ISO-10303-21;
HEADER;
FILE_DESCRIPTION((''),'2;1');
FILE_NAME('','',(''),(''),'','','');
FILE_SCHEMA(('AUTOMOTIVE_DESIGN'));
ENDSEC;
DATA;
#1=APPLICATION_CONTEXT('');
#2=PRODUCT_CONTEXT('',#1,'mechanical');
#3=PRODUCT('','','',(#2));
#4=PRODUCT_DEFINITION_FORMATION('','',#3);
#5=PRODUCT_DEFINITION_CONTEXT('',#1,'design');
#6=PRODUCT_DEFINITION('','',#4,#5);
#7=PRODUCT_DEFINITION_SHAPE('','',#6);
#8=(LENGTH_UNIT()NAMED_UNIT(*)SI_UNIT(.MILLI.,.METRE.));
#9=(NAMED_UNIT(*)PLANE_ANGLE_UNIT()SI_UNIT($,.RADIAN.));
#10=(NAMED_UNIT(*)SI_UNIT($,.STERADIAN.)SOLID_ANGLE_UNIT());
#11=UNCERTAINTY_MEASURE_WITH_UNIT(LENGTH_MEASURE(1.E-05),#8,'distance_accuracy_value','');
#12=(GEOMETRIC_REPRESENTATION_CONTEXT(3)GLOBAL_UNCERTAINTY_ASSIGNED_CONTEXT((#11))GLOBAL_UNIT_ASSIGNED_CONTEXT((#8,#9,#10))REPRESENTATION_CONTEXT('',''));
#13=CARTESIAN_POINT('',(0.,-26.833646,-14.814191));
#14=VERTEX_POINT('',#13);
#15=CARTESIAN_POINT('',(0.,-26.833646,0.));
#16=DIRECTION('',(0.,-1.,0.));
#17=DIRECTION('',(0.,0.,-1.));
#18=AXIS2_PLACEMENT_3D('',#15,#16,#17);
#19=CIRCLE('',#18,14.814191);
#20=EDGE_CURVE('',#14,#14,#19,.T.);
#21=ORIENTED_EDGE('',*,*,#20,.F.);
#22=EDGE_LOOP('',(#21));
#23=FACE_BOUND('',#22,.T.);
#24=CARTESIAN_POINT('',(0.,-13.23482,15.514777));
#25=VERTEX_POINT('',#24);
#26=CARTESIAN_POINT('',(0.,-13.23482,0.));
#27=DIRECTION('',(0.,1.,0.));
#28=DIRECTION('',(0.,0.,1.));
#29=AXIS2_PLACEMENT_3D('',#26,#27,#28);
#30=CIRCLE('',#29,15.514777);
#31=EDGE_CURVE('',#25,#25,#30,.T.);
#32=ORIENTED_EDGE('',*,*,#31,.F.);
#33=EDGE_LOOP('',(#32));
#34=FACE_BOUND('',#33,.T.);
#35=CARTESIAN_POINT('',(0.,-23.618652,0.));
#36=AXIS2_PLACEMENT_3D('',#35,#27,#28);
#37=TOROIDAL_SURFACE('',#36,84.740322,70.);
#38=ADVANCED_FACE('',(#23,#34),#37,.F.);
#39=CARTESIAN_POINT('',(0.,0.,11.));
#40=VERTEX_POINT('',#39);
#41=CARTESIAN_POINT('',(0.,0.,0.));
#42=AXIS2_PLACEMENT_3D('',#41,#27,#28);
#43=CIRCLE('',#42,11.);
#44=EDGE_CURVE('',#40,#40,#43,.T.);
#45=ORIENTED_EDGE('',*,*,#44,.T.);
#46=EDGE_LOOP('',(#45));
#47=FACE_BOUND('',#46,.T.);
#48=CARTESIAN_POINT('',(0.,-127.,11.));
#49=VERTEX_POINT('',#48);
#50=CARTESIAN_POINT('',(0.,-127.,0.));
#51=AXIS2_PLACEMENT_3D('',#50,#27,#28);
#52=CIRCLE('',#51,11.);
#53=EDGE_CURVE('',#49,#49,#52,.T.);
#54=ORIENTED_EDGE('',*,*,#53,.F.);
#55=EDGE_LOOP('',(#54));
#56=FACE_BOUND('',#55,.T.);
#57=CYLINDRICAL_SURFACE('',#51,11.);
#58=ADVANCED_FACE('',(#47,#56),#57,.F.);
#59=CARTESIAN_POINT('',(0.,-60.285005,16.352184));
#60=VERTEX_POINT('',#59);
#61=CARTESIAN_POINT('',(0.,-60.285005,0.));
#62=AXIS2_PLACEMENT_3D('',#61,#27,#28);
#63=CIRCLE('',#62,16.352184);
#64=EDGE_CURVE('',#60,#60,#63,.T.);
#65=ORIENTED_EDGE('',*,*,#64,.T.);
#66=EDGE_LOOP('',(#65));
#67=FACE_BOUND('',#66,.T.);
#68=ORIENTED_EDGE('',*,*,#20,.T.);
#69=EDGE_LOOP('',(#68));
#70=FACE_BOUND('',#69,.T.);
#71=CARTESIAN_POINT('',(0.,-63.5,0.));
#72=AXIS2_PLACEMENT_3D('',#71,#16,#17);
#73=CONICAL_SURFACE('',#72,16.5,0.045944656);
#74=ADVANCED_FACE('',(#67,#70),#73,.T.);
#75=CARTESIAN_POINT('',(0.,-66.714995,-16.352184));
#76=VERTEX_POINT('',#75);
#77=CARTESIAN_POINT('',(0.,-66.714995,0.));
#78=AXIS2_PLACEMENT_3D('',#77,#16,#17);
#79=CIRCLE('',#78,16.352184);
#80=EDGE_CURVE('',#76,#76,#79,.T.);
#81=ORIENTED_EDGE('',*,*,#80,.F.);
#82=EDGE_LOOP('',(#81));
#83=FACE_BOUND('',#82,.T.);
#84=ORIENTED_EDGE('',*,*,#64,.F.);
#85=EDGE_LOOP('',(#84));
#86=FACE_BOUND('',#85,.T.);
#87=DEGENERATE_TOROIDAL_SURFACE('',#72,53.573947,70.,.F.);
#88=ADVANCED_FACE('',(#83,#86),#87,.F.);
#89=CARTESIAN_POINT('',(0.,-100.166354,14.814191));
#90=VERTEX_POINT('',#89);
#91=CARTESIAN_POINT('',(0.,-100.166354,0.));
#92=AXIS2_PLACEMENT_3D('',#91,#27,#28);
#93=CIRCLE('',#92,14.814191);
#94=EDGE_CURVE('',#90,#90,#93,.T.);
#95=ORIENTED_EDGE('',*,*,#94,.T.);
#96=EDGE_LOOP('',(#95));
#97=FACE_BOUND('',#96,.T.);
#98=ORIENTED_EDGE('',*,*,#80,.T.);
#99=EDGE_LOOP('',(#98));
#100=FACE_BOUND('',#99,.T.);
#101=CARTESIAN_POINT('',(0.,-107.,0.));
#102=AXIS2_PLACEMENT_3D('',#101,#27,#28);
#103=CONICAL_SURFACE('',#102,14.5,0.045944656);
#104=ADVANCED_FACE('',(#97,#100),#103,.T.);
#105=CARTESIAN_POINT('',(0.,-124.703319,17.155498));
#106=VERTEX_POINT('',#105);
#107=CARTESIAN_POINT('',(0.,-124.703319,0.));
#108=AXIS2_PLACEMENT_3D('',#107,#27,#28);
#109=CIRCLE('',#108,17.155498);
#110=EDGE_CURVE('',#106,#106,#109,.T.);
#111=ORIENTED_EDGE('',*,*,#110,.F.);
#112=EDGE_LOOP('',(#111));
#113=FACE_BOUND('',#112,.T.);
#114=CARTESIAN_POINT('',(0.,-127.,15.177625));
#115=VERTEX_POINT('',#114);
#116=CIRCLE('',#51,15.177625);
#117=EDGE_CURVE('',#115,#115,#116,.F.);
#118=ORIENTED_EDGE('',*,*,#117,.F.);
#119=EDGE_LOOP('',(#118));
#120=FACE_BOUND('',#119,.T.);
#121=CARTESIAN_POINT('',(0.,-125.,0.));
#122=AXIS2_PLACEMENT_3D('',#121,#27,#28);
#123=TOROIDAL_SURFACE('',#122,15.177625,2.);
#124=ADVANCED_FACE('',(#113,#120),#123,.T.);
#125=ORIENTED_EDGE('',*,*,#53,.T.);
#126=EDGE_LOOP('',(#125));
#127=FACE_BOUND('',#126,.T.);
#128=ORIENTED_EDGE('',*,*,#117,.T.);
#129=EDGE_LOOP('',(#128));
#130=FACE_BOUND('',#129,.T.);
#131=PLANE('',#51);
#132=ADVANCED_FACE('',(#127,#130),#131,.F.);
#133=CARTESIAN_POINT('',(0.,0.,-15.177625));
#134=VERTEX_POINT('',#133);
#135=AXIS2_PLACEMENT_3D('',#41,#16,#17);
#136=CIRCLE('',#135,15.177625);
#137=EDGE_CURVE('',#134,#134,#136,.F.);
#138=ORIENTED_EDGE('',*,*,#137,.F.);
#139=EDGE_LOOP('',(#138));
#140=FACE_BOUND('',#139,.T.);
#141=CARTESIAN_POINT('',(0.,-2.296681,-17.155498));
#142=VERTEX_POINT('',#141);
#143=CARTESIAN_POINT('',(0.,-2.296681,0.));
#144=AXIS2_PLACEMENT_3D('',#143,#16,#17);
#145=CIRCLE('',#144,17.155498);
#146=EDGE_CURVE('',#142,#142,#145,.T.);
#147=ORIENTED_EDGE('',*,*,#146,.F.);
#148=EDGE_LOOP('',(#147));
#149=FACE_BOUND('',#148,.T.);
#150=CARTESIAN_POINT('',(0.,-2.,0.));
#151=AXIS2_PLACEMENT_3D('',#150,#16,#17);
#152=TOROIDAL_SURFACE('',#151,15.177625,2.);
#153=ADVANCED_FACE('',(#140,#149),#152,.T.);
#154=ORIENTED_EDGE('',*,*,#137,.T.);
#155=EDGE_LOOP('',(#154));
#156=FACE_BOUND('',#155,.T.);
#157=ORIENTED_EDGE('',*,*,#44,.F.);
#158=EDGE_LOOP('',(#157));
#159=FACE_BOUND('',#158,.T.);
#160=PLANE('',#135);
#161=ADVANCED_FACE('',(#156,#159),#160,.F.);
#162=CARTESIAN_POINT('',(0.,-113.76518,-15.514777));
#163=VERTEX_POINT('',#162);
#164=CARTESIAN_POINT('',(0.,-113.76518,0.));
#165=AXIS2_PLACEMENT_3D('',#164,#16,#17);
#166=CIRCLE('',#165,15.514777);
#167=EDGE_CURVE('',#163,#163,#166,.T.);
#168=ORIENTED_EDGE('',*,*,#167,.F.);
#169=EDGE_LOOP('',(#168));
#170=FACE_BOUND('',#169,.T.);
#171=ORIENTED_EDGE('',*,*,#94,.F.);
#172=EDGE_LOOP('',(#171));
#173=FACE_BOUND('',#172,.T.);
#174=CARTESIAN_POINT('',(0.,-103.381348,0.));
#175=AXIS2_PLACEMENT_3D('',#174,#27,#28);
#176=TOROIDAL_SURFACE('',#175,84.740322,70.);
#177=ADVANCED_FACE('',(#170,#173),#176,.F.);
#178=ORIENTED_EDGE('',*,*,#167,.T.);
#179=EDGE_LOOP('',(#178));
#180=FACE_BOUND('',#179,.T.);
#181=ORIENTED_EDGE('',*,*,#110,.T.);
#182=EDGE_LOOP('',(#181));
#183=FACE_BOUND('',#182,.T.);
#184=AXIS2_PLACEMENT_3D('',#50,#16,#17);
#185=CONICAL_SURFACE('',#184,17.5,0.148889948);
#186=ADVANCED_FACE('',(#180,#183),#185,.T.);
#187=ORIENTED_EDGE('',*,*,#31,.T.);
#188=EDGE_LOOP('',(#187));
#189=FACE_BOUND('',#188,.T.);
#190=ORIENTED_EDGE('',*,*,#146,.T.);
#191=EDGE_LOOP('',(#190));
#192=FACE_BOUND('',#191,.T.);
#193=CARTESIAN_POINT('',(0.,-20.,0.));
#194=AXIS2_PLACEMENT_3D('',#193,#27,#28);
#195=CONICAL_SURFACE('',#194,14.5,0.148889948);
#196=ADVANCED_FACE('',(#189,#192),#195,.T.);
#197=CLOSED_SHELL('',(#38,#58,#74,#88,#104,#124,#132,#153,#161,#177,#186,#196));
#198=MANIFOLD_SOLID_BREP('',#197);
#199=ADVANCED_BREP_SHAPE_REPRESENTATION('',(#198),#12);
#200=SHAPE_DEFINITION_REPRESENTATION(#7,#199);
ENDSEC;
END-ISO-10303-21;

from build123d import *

# Parameters (mm, degrees)
FILLET_1_R          = 2
FILLET_2_R          = 70
SKETCH_2_R          = 11
CUT_EXTRUDE_1_DEPTH = 130.302519771


with BuildPart() as part:
    # Эскиз1 → Повернуть1 (revolve)
    with BuildSketch(Plane.XY, mode=Mode.PRIVATE) as revolve_1_sk:
        Polygon((0, 0), (17.5, 0), (14.5, -20), (16.5, -63.5), (14.5, -107), (17.5, -127), (0, -127), align=None)
    revolve(revolve_1_sk.sketch.rotate(Axis((0, 24.4253472, 0), (0, -1, 0)), 90), axis=Axis((0, 24.4253472, 0), (0, -1, 0)))

    # Скругление1
    fillet_1_edges = [part.edges().sort_by_distance(p)[0] for p in [
        (0, 0, -17.5),
        (0, -127, -17.5),
    ]]
    fillet(fillet_1_edges, radius=FILLET_1_R)

    # Скругление2
    # the kernel refuses this fillet: 70 mm, written as the material it adds along each edge
    with BuildSketch(Plane(origin=(0, -20, 0), x_dir=(0, 0, 1), z_dir=(1, 0, 0))) as fillet_2_piece_1:
        with BuildLine():
            CenterArc((14.5 + FILLET_2_R * 1.00343316746, FILLET_2_R * 0.0516950223501), FILLET_2_R, 177.367565131, 11.163200479)
            Line((14.5 + FILLET_2_R * 0.00448843750259, FILLET_2_R * 0.0976235156813), (14.5 - FILLET_2_R * 0.0154904570965, FILLET_2_R * 0.0985420855479))
            Line((14.5 - FILLET_2_R * 0.0154904570965, FILLET_2_R * 0.0985420855479), (14.5 - FILLET_2_R * 0.0200686633491, -FILLET_2_R * 0.001033900447))
            Line((14.5 - FILLET_2_R * 0.0200686633491, -FILLET_2_R * 0.001033900447), (14.5 - FILLET_2_R * 0.00528191247035, -FILLET_2_R * 0.0996122396387))
            Line((14.5 - FILLET_2_R * 0.00528191247035, -FILLET_2_R * 0.0996122396387), (14.5 + FILLET_2_R * 0.014496814587, -FILLET_2_R * 0.0966454305801))
        make_face()
    revolve(axis=Axis((0, -20, 0), (0, -1, 0)))
    with BuildSketch(Plane(origin=(0, -107, 0), x_dir=(0, 0, 1), z_dir=(1, 0, 0))) as fillet_2_piece_2:
        with BuildLine():
            CenterArc((14.5 + FILLET_2_R * 1.00343316746, -FILLET_2_R * 0.0516950223501), FILLET_2_R, 171.46923439, 11.163200479)
            Line((14.5 + FILLET_2_R * 0.014496814587, FILLET_2_R * 0.0966454305801), (14.5 - FILLET_2_R * 0.00528191247035, FILLET_2_R * 0.0996122396387))
            Line((14.5 - FILLET_2_R * 0.00528191247035, FILLET_2_R * 0.0996122396387), (14.5 - FILLET_2_R * 0.0200686633491, FILLET_2_R * 0.001033900447))
            Line((14.5 - FILLET_2_R * 0.0200686633491, FILLET_2_R * 0.001033900447), (14.5 - FILLET_2_R * 0.0154904570965, -FILLET_2_R * 0.0985420855479))
            Line((14.5 - FILLET_2_R * 0.0154904570965, -FILLET_2_R * 0.0985420855479), (14.5 + FILLET_2_R * 0.00448843750259, -FILLET_2_R * 0.0976235156813))
        make_face()
    revolve(axis=Axis((0, -107, 0), (0, -1, 0)))
    # the kernel refuses this fillet: 70 mm, written as the material it takes off along each edge
    with BuildSketch(Plane(origin=(0, -63.5, 0), x_dir=(0, 0, 1), z_dir=(1, 0, 0))) as fillet_2_2_piece_1:
        with BuildLine():
            CenterArc((16.5 - FILLET_2_R * 1.00105638482, 0), FILLET_2_R, 357.367565131, 5.264869738)
            Line((16.5 - FILLET_2_R * 0.0021116548658, FILLET_2_R * 0.0459284933312), (16.5 + FILLET_2_R * 0.0178672397333, FILLET_2_R * 0.0468470631978))
            Line((16.5 + FILLET_2_R * 0.0178672397333, FILLET_2_R * 0.0468470631978), (16.5 + FILLET_2_R * 0.0200211276964, 0))
            Line((16.5 + FILLET_2_R * 0.0200211276964, 0), (16.5 + FILLET_2_R * 0.0178672397333, -FILLET_2_R * 0.0468470631978))
            Line((16.5 + FILLET_2_R * 0.0178672397333, -FILLET_2_R * 0.0468470631978), (16.5 - FILLET_2_R * 0.0021116548658, -FILLET_2_R * 0.0459284933312))
        make_face()
    revolve(axis=Axis((0, -63.5, 0), (0, -1, 0)), mode=Mode.SUBTRACT)

    # Эскиз2 → Вырез-Вытянуть1 (cut, through all)
    with BuildSketch(Plane(origin=(0, 0, 0), x_dir=(1, 0, 0), z_dir=(0, 1, 0))):
        with Locations(Location((0, 0, 0), (0, 0, 270))):
            Circle(SKETCH_2_R)
    extrude(amount=-CUT_EXTRUDE_1_DEPTH, mode=Mode.SUBTRACT)


solid = part.part
